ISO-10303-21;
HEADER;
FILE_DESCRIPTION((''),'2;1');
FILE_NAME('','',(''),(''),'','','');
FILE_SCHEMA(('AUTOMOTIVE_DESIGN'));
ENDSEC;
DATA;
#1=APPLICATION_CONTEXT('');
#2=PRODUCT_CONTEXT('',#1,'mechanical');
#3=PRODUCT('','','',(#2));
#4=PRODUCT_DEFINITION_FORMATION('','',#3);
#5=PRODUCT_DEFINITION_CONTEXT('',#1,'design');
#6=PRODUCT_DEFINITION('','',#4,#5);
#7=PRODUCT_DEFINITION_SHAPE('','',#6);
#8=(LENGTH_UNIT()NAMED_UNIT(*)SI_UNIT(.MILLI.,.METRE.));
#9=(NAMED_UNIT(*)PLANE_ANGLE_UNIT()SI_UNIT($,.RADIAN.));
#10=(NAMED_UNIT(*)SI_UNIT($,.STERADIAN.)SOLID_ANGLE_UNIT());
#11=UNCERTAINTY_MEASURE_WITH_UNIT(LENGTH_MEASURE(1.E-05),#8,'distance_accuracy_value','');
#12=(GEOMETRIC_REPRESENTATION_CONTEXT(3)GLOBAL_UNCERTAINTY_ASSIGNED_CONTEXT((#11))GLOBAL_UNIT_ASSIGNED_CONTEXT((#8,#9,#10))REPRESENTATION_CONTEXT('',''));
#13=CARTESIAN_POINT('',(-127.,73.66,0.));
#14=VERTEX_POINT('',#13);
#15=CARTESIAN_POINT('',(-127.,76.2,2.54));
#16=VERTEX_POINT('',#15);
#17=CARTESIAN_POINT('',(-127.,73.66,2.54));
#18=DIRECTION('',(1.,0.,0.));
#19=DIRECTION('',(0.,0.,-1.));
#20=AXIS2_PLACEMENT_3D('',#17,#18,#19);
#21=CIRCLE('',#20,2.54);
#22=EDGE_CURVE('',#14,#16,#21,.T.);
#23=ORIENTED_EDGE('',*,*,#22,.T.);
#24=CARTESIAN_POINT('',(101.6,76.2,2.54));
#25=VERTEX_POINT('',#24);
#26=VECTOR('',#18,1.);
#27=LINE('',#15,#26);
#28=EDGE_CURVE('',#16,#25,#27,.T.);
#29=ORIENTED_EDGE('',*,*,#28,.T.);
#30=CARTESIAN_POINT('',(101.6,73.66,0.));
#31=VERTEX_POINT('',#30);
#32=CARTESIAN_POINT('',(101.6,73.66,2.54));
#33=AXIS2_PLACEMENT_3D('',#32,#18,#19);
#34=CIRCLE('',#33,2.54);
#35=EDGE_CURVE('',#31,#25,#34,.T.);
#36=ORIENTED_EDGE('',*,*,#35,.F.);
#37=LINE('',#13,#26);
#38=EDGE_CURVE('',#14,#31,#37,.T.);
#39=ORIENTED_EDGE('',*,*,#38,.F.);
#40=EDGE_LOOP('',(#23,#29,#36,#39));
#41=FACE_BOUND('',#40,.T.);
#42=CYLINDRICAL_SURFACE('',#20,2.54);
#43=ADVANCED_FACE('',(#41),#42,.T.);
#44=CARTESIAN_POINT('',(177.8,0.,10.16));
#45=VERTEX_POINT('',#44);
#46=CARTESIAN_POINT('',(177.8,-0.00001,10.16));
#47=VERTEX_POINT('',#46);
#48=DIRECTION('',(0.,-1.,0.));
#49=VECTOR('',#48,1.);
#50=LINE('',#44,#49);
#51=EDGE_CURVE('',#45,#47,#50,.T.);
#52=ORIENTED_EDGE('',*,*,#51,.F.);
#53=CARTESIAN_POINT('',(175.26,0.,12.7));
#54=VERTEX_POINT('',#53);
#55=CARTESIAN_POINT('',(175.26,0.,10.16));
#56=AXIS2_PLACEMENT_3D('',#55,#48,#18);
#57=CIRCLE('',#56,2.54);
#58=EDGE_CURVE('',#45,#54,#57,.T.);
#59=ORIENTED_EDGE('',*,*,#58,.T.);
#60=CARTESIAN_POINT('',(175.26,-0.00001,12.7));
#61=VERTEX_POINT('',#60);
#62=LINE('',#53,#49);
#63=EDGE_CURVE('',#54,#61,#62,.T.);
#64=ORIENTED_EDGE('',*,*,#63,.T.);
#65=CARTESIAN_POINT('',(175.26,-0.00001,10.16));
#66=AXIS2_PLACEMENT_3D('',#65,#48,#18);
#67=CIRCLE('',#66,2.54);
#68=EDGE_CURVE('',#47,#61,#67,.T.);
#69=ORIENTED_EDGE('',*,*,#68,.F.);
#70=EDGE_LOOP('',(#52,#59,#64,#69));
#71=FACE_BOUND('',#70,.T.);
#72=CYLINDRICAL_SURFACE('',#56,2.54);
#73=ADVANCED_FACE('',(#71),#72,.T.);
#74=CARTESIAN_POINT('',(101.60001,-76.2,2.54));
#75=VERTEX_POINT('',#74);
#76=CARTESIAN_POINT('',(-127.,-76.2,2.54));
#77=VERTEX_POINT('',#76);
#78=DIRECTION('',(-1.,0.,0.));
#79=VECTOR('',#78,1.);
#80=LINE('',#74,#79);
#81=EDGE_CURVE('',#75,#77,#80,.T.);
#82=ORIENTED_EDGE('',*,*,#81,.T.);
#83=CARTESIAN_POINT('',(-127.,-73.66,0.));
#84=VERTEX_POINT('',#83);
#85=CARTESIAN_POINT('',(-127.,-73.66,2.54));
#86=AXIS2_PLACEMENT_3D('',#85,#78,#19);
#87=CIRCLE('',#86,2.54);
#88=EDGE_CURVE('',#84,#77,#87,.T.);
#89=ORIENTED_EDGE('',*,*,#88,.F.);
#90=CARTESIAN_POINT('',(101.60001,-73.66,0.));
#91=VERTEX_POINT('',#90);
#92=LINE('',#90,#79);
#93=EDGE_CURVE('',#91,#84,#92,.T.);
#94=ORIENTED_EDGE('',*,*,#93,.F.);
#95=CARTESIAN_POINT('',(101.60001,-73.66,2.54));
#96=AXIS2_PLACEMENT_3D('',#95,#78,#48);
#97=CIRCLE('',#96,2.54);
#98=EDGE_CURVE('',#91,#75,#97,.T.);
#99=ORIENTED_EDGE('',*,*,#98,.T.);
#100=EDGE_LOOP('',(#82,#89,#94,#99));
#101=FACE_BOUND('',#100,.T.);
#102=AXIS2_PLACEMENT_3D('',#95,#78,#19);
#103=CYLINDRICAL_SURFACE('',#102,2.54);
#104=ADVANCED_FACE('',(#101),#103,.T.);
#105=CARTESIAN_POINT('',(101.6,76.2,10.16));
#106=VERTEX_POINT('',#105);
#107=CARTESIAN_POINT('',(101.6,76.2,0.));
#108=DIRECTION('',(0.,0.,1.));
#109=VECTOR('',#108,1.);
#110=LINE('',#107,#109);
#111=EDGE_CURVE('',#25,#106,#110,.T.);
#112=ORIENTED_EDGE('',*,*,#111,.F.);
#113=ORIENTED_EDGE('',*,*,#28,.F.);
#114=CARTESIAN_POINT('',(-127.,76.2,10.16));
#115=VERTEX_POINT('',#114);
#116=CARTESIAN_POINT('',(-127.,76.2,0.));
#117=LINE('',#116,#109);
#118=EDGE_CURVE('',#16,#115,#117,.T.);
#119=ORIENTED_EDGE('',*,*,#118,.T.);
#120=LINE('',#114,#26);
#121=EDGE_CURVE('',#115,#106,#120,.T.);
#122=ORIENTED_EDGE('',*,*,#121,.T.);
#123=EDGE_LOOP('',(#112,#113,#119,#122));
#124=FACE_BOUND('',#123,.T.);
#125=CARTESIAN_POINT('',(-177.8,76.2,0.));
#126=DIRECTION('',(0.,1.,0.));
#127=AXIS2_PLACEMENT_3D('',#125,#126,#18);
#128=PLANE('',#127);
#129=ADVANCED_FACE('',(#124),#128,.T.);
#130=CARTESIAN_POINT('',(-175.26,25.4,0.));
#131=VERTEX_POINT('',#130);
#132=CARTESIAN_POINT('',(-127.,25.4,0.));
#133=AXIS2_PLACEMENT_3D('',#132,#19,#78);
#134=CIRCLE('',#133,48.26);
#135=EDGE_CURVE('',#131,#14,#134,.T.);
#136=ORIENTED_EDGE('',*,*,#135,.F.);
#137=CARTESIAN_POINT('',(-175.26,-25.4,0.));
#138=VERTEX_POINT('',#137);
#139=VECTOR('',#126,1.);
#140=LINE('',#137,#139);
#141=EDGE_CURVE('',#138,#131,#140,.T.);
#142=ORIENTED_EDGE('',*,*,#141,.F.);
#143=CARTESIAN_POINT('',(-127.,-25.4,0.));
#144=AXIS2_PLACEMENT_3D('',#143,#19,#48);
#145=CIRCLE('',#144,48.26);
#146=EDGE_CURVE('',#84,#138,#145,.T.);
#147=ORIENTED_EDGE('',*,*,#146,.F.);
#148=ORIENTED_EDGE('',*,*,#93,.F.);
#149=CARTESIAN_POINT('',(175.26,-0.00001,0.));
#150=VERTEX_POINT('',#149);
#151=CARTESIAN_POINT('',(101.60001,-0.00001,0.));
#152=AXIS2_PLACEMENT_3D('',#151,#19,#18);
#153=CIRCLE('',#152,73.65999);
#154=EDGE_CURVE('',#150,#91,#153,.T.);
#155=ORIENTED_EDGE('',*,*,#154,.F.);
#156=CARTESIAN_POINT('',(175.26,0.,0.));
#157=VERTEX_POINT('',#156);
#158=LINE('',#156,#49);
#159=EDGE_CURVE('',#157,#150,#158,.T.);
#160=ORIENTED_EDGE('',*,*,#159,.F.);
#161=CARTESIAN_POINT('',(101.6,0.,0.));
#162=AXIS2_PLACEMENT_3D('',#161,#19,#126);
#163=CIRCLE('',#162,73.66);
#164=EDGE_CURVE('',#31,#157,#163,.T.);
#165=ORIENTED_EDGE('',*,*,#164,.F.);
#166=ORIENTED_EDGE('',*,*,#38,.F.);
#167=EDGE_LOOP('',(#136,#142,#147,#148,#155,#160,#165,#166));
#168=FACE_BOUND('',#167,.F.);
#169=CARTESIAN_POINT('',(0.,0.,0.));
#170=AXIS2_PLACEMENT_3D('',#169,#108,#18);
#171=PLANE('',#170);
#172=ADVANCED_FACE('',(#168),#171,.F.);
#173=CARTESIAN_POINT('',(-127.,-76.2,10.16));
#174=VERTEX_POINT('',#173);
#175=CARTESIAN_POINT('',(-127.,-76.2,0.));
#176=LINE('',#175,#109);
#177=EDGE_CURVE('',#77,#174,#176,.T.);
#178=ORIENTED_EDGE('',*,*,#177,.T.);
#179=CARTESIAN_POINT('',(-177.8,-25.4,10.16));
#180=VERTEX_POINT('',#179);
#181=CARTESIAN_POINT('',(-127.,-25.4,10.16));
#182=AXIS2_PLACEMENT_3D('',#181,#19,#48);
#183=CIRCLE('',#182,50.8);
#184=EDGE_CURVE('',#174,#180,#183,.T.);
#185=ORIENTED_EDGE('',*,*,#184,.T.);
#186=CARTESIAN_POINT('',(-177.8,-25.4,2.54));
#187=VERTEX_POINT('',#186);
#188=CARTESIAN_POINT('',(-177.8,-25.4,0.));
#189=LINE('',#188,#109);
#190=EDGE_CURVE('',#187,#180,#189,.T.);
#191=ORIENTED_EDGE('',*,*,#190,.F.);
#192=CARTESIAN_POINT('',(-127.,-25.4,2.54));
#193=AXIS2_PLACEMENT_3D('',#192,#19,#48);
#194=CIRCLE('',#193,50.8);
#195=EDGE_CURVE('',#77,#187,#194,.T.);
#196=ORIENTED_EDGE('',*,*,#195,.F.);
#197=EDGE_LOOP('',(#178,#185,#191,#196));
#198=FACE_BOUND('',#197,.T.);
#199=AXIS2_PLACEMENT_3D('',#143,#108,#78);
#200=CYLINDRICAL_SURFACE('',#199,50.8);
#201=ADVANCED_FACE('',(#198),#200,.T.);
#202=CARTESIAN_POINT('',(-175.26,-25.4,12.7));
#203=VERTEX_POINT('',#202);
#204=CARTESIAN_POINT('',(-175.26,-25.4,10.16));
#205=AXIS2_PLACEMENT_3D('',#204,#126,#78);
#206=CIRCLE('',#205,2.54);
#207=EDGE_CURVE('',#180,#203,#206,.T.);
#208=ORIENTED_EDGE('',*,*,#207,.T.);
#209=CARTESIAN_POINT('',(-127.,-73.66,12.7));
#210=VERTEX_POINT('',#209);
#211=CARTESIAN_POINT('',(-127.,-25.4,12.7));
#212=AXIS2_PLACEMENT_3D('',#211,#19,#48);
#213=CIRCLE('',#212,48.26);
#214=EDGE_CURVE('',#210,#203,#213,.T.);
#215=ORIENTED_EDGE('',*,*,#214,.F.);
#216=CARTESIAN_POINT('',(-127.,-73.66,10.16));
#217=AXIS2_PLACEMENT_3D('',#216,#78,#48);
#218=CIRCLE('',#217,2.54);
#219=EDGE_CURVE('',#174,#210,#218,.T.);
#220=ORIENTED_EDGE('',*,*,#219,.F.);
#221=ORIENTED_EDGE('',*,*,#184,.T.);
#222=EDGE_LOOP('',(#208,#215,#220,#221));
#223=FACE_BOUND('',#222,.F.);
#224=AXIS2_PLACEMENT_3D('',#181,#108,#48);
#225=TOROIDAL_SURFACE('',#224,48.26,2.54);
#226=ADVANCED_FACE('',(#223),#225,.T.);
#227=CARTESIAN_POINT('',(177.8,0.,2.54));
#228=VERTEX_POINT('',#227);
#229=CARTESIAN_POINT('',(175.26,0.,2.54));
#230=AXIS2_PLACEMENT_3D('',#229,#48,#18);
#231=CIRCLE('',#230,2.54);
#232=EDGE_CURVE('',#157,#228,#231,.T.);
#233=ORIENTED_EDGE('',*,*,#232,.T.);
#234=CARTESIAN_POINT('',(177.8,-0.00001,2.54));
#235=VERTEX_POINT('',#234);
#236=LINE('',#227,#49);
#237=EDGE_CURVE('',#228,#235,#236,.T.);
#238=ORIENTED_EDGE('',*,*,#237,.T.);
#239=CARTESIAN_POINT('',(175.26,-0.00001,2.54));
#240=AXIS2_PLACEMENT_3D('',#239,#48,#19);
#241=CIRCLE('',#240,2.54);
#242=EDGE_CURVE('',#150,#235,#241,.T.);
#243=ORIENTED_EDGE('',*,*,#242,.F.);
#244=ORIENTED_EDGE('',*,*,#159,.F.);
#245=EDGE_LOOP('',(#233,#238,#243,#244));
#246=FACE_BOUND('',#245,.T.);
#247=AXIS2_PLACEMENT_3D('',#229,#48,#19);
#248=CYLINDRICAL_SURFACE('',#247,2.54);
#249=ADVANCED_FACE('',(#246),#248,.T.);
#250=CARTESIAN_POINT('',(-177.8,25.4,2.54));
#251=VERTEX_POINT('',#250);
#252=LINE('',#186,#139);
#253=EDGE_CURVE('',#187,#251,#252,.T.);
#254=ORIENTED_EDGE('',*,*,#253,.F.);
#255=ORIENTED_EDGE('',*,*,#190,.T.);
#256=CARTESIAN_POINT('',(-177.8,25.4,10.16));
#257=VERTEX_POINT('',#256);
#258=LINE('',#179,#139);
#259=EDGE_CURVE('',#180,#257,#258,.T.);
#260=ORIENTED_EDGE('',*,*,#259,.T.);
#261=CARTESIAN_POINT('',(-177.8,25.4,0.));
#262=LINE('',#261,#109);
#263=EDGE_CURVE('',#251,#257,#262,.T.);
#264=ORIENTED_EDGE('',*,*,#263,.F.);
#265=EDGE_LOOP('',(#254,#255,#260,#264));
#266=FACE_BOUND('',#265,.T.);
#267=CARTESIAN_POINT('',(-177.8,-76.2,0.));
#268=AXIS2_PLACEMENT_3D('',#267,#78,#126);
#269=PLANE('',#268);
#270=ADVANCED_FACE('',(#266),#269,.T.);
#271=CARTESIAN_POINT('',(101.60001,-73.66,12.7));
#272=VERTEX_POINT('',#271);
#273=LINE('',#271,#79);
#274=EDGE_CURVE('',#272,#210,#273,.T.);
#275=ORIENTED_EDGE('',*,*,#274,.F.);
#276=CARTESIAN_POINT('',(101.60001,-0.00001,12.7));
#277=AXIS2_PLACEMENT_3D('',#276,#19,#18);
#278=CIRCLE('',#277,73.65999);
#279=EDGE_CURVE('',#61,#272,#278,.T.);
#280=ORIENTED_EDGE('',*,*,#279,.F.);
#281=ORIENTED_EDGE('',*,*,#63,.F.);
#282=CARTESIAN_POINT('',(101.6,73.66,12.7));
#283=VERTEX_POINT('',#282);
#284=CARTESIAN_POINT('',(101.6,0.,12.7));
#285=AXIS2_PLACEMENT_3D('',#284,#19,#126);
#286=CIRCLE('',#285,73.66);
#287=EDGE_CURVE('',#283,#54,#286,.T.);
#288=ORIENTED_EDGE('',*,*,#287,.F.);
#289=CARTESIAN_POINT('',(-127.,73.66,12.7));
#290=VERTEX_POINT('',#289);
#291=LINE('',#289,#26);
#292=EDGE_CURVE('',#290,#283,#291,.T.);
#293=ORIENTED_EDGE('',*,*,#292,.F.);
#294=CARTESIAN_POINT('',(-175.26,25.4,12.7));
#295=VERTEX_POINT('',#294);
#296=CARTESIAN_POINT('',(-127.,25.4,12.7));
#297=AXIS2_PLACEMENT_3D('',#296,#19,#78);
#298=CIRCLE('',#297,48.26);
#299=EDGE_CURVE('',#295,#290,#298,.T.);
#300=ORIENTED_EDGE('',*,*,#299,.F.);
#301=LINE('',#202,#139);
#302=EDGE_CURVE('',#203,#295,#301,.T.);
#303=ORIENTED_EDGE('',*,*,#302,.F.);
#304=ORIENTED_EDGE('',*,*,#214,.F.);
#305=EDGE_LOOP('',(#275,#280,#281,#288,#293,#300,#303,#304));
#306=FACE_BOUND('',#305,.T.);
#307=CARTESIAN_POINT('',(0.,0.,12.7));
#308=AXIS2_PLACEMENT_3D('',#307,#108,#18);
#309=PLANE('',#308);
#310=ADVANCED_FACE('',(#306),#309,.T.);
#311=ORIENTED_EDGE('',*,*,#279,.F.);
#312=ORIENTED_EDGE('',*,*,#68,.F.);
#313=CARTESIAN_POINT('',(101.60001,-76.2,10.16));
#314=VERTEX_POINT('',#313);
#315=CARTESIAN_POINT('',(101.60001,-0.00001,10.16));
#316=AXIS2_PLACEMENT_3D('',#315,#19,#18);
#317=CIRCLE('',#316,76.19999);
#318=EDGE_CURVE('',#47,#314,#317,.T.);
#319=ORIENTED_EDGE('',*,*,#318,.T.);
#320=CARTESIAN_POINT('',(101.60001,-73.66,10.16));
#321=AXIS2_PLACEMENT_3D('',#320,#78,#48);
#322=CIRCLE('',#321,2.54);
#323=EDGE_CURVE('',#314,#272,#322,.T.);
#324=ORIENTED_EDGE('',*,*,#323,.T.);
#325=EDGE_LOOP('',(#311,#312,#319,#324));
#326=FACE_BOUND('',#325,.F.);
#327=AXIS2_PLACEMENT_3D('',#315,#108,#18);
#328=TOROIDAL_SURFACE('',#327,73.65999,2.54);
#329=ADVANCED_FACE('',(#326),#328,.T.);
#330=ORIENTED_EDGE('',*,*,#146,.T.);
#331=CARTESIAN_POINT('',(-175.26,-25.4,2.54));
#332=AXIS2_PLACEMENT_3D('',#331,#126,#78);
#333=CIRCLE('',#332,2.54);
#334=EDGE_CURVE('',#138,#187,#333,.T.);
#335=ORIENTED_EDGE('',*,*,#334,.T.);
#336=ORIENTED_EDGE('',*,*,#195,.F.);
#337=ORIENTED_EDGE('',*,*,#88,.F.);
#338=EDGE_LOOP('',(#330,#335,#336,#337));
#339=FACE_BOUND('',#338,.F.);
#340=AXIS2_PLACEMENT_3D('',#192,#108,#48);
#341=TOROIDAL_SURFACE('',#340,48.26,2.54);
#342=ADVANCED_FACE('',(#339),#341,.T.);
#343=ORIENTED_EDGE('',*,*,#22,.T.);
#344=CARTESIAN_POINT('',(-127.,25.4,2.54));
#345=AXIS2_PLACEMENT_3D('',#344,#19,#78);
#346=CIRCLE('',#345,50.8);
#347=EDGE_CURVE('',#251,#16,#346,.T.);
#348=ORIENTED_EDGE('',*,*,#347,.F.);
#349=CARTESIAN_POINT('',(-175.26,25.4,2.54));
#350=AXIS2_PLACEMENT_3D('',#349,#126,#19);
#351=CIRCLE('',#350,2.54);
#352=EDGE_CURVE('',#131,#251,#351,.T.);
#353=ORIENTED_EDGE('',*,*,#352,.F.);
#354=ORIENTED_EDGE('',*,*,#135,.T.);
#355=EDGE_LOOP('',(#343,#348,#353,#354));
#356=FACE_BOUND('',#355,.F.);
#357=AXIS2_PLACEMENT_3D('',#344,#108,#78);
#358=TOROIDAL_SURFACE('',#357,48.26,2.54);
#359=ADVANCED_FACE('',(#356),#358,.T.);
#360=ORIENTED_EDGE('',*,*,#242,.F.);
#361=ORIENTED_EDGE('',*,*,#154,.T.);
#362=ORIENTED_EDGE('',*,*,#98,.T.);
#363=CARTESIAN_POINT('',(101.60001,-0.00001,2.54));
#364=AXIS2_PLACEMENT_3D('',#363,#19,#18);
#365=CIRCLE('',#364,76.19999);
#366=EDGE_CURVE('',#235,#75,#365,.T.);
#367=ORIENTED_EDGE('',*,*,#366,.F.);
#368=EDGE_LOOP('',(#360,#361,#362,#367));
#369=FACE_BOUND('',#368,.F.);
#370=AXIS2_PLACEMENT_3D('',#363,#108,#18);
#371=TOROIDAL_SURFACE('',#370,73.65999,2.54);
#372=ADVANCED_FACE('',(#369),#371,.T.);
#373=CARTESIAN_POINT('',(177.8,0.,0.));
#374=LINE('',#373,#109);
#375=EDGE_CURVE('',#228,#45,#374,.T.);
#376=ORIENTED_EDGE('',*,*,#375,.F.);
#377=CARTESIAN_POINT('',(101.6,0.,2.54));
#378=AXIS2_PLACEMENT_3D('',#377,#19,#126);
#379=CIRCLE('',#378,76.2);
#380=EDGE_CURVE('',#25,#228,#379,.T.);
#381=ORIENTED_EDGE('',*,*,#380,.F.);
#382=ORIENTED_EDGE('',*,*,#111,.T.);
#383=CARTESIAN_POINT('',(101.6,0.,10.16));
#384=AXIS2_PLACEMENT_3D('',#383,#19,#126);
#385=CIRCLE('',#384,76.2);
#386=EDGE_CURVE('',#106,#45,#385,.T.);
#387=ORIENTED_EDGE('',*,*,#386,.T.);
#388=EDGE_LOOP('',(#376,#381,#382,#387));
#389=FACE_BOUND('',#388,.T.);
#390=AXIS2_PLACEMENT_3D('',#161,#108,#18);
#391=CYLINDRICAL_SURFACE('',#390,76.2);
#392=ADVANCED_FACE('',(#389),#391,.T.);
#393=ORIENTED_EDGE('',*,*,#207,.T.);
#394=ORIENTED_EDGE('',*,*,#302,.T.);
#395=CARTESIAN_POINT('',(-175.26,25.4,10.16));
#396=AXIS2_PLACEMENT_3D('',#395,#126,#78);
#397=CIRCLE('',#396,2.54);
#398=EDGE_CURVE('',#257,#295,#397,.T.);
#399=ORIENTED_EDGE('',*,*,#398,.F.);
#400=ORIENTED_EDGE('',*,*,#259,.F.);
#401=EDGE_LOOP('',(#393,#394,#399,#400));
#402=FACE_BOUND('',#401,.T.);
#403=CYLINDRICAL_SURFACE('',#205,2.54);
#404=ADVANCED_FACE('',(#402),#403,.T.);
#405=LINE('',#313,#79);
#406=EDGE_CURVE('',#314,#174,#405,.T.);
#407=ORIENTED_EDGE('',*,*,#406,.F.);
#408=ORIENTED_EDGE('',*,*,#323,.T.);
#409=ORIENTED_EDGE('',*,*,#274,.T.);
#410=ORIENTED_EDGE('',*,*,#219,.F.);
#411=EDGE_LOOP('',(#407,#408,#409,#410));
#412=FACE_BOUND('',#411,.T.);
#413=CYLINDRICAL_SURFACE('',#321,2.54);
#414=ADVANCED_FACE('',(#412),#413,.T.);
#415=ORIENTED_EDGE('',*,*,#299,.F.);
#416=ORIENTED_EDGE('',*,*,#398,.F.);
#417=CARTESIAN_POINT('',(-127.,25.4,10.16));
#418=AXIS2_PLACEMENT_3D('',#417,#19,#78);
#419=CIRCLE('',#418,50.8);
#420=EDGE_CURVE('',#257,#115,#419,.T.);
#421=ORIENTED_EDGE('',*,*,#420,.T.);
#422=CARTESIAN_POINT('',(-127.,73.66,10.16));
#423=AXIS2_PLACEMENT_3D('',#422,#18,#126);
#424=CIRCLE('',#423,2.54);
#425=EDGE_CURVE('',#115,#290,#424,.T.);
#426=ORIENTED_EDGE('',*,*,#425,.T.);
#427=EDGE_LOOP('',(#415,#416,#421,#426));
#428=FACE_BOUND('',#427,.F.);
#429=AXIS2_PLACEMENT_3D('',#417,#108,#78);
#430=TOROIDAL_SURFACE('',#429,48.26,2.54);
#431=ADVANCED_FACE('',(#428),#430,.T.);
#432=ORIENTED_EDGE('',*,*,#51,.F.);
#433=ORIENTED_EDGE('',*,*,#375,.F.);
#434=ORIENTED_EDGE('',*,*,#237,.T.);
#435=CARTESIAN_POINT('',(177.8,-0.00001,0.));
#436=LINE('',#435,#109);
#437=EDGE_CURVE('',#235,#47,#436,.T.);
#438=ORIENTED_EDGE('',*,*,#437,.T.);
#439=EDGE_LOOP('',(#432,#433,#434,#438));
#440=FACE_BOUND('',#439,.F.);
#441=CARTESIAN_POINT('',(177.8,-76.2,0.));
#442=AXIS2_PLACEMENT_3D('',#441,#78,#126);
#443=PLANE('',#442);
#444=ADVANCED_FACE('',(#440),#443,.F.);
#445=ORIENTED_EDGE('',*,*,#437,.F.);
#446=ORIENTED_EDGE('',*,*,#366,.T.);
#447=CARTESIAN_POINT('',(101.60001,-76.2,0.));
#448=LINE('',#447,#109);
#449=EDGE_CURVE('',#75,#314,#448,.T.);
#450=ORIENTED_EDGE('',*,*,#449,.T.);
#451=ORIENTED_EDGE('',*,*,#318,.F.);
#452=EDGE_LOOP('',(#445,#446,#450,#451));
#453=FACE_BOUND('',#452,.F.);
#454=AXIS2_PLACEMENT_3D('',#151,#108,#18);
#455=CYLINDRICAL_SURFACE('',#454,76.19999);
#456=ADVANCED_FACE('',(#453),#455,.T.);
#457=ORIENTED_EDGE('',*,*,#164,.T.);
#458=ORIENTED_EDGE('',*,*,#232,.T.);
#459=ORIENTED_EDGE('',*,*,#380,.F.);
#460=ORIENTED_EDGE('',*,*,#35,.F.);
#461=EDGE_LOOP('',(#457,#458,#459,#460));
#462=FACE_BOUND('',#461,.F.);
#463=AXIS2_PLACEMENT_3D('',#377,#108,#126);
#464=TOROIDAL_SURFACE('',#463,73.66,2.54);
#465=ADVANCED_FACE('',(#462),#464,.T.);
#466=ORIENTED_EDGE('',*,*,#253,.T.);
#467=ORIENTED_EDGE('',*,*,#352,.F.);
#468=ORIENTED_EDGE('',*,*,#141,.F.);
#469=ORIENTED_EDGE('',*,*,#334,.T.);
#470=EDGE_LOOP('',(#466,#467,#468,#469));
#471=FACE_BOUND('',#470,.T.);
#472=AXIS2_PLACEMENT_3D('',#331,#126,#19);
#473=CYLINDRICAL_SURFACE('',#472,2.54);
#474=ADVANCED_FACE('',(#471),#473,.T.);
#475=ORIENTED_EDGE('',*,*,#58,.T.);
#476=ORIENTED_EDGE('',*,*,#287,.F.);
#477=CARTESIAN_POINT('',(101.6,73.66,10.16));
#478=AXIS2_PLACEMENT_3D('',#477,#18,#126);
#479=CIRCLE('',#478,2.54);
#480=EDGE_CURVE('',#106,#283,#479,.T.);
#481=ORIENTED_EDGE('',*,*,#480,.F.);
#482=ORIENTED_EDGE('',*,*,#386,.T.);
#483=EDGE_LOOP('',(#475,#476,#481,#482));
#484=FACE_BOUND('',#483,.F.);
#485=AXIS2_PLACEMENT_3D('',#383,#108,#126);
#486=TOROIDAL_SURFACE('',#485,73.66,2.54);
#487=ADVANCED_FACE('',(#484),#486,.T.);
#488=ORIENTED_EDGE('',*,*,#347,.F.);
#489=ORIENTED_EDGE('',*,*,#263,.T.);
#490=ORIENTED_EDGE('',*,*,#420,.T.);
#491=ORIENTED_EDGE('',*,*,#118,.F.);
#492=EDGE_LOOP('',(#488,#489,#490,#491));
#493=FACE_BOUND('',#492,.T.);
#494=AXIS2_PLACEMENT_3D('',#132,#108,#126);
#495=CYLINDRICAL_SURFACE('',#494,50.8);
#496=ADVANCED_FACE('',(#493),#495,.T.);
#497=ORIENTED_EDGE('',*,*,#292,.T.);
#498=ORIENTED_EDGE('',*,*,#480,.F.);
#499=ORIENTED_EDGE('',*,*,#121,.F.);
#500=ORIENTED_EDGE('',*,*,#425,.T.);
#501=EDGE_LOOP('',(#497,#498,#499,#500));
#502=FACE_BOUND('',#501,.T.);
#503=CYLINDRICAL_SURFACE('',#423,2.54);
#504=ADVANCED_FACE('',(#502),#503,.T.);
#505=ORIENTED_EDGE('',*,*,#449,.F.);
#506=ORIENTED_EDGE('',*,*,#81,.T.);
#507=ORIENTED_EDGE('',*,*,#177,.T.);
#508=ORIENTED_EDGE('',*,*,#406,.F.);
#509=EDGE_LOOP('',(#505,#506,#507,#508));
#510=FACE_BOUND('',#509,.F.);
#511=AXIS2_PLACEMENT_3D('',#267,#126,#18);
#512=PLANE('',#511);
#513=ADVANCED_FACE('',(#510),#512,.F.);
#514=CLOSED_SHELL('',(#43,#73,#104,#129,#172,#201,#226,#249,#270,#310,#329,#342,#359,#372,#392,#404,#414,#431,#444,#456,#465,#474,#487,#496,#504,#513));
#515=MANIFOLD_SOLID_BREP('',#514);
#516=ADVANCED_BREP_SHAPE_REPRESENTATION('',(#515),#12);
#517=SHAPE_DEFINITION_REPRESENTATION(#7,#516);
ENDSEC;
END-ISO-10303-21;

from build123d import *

# Parameters (mm, degrees)
F0_W     = 355.6
F0_H     = 152.4
F1_DEPTH = 12.7
F2_R     = 76.2
F3_R     = 76.19999
F4_R     = 50.8
F5_R     = 50.8
F6_R     = 2.54


# Not quite as in the source:
# - a fillet or chamfer is up to 0.001 mm smaller than in the source, because OpenCascade refuses the exact size


with BuildPart() as f1:
    # F0 (on Top) → F1 (new body)
    with BuildSketch(Plane.XY):
        Rectangle(F0_W, F0_H)
    extrude(amount=F1_DEPTH)

    # F2
    f2_edges = [f1.edges().sort_by_distance(p)[0] for p in [
        (177.8, 76.2, 6.35),
    ]]
    fillet(f2_edges, radius=F2_R)

    # F3 (radius 76.2 in the source; OpenCascade refuses exactly that, so slightly less here)
    f3_edges = [f1.edges().sort_by_distance(p)[0] for p in [
        (177.8, -76.2, 6.35),
    ]]
    fillet(f3_edges, radius=F3_R)

    # F4
    f4_edges = [f1.edges().sort_by_distance(p)[0] for p in [
        (-177.8, 76.2, 6.35),
    ]]
    fillet(f4_edges, radius=F4_R)

    # F5
    f5_edges = [f1.edges().sort_by_distance(p)[0] for p in [
        (-177.8, -76.2, 6.35),
    ]]
    fillet(f5_edges, radius=F5_R)

    # F6
    f6_edges = [f1.edges().sort_by_distance(p)[0] for p in [
        (-12.7, 76.2, 12.7),
        (-12.7, 76.2, 0),
    ]]
    fillet(f6_edges, radius=F6_R)


solid = f1.part
